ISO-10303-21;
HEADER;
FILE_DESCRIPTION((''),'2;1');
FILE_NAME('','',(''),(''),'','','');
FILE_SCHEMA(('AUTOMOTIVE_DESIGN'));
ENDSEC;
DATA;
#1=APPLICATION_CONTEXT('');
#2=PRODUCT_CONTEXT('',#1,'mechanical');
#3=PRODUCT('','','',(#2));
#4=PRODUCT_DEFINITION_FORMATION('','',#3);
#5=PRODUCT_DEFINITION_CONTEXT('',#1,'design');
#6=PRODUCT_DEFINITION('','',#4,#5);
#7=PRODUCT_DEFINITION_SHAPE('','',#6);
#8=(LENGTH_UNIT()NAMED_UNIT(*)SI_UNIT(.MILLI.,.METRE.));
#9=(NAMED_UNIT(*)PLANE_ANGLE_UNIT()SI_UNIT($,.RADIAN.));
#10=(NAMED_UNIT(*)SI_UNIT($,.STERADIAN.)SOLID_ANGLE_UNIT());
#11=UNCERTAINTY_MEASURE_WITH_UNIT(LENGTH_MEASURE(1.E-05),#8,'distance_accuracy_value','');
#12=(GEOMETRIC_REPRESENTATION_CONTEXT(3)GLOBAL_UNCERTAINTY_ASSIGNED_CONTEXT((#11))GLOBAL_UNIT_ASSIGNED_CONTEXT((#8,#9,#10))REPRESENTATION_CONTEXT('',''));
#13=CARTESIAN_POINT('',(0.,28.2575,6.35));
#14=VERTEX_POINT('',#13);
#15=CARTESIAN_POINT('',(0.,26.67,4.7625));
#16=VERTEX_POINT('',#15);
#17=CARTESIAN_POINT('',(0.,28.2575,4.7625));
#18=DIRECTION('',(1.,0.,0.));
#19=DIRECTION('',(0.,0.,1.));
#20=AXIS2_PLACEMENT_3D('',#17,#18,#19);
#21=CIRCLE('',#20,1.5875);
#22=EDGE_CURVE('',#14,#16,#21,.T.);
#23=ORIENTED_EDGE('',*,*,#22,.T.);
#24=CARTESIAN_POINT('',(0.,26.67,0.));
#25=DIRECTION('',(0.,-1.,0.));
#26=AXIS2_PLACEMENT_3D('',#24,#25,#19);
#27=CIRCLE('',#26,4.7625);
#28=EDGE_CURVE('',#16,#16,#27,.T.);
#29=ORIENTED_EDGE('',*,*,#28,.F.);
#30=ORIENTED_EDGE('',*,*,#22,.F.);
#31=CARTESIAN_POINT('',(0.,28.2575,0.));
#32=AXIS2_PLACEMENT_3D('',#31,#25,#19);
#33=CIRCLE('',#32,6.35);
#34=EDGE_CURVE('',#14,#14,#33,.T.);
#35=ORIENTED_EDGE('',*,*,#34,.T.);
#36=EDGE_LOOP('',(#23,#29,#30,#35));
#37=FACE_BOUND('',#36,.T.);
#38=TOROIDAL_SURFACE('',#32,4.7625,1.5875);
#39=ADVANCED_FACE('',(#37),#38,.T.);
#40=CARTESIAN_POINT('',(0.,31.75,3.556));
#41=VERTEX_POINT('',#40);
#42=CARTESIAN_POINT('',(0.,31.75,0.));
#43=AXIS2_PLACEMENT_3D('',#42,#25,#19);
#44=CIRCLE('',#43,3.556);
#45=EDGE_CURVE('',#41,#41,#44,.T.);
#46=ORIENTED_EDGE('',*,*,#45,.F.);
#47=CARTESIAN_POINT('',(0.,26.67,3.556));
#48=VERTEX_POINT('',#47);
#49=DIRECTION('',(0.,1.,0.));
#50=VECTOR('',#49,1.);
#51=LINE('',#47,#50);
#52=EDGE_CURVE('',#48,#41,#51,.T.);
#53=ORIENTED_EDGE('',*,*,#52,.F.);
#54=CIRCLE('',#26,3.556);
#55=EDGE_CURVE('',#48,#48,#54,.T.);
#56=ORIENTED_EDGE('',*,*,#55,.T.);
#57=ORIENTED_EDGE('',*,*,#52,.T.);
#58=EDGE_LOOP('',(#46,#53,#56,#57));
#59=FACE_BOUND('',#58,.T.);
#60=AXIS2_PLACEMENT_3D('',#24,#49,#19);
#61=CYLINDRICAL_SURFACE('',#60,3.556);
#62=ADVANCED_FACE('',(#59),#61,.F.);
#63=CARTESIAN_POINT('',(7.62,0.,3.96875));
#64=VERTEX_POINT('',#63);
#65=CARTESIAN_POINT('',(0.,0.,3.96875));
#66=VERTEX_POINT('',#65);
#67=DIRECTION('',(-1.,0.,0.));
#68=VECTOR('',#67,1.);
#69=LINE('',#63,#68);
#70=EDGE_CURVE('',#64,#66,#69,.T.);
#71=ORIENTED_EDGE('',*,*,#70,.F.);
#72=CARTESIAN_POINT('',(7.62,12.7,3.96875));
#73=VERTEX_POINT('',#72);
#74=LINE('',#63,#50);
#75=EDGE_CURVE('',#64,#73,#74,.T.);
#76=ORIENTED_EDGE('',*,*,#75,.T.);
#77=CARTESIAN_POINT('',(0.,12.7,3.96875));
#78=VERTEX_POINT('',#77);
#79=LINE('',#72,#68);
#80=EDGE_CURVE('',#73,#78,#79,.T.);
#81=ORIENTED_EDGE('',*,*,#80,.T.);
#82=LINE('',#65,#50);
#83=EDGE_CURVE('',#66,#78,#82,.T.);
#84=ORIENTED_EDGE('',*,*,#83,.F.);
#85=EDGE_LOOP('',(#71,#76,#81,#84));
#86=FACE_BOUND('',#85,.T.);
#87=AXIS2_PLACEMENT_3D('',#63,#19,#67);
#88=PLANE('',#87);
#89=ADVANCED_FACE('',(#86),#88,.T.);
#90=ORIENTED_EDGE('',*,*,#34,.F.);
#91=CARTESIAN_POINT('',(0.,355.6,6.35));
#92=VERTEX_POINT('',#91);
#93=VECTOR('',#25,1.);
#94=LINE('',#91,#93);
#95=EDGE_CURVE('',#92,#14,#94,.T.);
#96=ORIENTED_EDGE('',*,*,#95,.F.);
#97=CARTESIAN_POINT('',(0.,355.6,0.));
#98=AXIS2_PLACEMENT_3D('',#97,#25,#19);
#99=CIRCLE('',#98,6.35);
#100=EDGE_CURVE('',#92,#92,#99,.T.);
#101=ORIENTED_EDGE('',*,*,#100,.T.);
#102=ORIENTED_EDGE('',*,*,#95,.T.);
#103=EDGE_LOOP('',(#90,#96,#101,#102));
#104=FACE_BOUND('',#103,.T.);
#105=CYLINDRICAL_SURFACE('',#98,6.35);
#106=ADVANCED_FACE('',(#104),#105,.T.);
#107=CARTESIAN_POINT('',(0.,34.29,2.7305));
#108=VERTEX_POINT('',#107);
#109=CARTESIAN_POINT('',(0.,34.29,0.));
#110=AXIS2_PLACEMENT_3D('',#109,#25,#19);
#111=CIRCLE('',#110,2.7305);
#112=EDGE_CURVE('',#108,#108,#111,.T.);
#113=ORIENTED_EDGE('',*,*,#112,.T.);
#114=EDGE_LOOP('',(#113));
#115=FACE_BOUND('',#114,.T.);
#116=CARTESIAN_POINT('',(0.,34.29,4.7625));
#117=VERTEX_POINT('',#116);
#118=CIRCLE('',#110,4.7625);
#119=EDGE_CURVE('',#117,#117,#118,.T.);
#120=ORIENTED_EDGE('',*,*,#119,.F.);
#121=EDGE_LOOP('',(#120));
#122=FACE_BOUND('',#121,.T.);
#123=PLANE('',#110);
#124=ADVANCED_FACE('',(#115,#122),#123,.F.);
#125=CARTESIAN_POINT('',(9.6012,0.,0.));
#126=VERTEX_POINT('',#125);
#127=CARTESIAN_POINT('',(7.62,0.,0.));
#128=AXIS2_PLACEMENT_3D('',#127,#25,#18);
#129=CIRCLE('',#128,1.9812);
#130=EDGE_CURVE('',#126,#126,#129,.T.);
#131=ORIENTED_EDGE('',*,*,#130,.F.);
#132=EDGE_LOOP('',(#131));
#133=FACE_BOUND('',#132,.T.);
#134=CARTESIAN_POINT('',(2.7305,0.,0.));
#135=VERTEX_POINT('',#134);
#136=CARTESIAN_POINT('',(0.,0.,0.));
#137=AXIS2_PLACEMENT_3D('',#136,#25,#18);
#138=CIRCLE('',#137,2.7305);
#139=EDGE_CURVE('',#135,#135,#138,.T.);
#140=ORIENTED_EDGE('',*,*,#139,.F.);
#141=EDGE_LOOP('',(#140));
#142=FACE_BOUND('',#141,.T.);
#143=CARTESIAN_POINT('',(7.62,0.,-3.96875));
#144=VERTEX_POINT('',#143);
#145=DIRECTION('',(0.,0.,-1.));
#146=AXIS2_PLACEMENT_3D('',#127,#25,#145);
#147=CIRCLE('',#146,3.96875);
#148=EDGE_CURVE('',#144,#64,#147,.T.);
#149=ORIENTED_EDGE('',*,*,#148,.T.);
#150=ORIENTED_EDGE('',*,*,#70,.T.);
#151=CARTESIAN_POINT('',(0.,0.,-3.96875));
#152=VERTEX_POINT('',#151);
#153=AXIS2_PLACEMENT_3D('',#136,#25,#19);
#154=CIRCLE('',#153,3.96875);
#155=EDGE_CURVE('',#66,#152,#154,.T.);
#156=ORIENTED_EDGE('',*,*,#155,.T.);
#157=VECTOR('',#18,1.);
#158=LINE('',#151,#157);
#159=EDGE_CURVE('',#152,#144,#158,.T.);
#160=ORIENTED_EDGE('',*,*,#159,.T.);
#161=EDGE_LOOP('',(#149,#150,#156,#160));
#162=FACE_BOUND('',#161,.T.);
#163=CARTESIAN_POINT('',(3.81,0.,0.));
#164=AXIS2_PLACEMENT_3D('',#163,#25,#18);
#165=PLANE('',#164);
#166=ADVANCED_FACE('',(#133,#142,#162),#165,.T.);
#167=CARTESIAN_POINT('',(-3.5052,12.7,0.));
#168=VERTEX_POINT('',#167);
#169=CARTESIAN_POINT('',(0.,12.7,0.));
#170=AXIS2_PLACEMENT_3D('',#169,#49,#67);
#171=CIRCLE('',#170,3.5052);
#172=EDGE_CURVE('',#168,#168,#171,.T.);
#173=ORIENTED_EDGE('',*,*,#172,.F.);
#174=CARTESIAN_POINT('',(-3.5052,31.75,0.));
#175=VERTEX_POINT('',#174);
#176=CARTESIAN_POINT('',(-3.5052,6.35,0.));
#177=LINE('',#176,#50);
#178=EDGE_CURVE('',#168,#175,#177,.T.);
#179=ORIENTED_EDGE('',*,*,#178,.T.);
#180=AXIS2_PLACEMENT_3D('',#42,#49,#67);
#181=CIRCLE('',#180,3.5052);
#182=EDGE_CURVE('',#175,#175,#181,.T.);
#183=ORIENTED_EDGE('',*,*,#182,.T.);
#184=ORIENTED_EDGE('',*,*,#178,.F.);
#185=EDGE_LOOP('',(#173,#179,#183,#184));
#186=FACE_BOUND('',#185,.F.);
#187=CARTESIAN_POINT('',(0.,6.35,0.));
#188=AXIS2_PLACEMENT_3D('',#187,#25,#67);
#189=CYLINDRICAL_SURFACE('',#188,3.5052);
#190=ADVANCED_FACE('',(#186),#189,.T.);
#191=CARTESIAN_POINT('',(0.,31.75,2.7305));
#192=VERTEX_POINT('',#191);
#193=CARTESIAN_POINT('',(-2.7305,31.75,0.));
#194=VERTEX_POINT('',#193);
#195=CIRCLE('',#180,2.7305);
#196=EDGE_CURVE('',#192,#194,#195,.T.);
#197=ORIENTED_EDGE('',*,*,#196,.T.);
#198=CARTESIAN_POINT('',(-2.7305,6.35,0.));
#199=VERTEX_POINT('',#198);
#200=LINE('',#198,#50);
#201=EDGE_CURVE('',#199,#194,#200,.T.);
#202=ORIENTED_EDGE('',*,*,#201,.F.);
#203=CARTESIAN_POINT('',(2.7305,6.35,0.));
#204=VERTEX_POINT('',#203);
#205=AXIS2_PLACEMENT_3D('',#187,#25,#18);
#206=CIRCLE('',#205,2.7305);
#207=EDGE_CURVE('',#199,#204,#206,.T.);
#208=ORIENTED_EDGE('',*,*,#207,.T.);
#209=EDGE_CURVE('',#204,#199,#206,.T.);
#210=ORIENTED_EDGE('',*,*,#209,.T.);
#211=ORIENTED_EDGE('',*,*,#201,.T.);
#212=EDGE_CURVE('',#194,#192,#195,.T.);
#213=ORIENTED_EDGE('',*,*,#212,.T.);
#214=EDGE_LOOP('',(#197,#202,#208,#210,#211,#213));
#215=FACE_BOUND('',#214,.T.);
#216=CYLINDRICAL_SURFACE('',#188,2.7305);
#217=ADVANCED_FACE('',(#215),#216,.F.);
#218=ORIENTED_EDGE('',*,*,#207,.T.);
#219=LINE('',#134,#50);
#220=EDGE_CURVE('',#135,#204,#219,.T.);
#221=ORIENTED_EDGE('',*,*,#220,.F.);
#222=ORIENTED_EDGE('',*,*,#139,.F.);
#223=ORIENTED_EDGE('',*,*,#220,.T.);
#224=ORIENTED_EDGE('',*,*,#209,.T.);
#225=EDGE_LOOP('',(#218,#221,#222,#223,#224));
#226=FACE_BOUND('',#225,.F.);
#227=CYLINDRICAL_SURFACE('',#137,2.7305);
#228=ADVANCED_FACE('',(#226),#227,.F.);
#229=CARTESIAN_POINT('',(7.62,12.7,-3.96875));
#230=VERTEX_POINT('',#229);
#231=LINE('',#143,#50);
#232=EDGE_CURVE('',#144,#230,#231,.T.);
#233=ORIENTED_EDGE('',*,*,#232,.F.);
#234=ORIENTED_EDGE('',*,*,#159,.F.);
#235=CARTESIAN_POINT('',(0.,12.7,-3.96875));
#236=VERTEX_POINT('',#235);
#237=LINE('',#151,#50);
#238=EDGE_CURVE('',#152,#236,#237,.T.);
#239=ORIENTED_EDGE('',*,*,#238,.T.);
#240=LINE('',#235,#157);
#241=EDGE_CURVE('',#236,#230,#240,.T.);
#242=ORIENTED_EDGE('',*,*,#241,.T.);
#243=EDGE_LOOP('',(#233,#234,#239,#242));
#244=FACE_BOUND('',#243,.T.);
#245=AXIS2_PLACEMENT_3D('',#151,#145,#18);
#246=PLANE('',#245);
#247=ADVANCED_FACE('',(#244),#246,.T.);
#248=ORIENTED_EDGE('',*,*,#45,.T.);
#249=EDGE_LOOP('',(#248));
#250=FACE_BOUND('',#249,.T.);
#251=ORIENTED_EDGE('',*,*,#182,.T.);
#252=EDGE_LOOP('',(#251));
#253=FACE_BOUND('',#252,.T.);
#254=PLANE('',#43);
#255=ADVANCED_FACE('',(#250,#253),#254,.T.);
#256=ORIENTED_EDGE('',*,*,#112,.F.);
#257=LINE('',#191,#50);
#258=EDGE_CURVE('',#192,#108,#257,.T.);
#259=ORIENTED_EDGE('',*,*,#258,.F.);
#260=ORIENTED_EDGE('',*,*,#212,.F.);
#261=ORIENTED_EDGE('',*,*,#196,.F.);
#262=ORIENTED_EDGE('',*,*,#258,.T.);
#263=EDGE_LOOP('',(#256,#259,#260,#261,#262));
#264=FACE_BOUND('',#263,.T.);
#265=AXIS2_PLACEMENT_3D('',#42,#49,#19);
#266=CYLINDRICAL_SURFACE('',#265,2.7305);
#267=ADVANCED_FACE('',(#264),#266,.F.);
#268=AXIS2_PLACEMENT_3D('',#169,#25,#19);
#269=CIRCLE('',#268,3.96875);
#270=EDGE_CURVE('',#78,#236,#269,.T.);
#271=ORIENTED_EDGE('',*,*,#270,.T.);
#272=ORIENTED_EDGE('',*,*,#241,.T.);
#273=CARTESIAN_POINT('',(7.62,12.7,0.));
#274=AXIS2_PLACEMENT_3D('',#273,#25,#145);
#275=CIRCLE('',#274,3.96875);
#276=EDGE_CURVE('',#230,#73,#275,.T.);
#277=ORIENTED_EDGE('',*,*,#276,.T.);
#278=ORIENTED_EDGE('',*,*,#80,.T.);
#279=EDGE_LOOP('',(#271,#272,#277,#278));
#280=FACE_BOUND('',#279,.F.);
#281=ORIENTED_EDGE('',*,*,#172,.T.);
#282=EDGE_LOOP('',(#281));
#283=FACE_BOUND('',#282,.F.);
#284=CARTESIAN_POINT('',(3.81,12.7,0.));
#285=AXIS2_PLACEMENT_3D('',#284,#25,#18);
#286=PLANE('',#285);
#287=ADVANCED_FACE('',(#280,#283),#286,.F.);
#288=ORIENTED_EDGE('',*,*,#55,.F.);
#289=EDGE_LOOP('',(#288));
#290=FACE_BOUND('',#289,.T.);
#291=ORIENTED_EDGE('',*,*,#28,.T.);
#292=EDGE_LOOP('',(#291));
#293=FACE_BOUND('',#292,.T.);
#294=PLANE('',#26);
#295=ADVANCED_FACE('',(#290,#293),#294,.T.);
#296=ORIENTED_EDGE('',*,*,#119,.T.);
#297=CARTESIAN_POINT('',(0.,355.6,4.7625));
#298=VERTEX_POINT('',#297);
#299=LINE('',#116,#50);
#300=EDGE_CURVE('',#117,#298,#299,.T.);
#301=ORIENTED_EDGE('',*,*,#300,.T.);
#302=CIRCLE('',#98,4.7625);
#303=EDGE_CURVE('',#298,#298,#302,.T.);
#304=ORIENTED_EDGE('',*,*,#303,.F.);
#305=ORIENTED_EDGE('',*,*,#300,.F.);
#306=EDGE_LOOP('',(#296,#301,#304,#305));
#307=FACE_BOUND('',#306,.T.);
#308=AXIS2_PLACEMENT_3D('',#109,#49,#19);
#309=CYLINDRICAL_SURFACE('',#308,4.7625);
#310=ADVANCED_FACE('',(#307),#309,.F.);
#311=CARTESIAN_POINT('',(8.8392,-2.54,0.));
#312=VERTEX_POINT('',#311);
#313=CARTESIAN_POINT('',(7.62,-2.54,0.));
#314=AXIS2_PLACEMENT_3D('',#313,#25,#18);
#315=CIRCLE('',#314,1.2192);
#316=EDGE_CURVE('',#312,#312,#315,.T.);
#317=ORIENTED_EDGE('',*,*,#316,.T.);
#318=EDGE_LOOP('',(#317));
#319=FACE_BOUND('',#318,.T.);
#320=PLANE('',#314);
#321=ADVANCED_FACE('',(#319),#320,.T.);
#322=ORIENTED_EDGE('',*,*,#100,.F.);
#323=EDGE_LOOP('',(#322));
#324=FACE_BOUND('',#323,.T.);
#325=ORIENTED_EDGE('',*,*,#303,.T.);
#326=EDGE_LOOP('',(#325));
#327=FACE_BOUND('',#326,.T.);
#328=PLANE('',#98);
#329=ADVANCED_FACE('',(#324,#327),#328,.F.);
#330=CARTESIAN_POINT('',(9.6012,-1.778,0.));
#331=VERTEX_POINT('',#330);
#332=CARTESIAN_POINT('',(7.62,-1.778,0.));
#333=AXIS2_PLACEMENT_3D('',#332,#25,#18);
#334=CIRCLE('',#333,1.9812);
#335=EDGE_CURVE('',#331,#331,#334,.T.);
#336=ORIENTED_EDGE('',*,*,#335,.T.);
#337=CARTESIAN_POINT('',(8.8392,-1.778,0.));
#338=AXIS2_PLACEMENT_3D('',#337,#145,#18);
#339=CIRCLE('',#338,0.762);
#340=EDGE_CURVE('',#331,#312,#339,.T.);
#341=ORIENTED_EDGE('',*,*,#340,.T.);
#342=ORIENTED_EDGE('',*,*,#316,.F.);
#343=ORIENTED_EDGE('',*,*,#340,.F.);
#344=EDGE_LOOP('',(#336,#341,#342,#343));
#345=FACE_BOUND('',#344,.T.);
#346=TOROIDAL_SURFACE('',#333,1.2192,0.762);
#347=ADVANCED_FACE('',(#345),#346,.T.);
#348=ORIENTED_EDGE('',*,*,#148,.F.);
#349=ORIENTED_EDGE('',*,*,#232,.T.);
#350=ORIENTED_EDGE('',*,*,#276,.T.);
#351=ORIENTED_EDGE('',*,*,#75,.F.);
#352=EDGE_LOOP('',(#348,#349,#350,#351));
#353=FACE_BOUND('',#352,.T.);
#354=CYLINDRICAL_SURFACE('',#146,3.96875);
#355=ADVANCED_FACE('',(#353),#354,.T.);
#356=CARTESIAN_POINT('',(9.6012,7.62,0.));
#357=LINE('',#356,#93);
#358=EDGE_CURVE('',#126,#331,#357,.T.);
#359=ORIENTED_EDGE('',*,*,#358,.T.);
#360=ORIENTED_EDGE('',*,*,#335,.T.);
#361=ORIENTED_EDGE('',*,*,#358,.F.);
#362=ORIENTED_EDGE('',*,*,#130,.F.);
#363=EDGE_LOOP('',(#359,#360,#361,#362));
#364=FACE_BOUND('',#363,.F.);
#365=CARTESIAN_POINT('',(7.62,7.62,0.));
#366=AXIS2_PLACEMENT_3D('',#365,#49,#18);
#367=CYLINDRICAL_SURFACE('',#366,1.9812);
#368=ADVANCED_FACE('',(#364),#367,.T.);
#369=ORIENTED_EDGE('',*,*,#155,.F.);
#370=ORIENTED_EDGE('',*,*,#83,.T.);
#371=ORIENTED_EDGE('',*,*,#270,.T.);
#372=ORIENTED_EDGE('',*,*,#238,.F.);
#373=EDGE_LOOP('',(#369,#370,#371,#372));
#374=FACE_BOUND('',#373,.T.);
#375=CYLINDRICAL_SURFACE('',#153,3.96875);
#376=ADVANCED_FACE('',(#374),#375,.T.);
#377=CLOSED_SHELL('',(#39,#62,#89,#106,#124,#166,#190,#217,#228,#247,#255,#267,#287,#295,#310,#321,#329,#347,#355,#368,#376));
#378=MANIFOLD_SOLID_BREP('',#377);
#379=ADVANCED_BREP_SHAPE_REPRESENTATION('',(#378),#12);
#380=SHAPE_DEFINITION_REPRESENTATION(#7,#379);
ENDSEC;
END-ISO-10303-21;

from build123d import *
from build123d import SkipClean  # not in build123d's __all__

# Parameters (mm, degrees)
F0_R     = 2.7305
F1_DEPTH = 12.7
F2_R     = 3.5052
F3_DEPTH = 6.35
F4_R     = 1.9812
F5_DEPTH = 7.62
F6_R     = 3.5052
F6_R_2   = 2.7305
F7_DEPTH = 25.4
F8_R     = 1.9812
F9_DEPTH = 10.16
F10_R    = 0.762


# Not quite as in the source:
# - after a boolean that leaves OpenCascade's solid faulty, fix() repairs it


with BuildPart() as f1:
    # F0 (on Front) → F1 (new body)
    with BuildSketch(Plane.XZ):
        with BuildLine():
            Line((7.62, 3.96875), (0, 3.96875))
            ThreePointArc((0, 3.96875), (-3.96875, 0), (0, -3.96875))
            Line((0, -3.96875), (7.62, -3.96875))
            ThreePointArc((7.62, -3.96875), (11.58875, 0), (7.62, 3.96875))
        make_face()
        Circle(F0_R, mode=Mode.SUBTRACT)
    extrude(amount=-F1_DEPTH)

    # F2 (on face) → F3 (cut)
    with BuildSketch(Plane(origin=(0, 12.7, 0), x_dir=(-1, 0, 0), z_dir=(0, 1, 0))):
        Circle(F2_R)
    extrude(amount=-F3_DEPTH, mode=Mode.SUBTRACT)

    # F4 (on face) → F5 (cut)
    with BuildSketch(Plane.XZ):
        with Locations((7.62, 0)):
            Circle(F4_R)
    extrude(amount=-F5_DEPTH, mode=Mode.SUBTRACT)

    # F6 (on face) → F7 (join)
    with BuildSketch(Plane(origin=(0, 6.35, 0), x_dir=(-1, 0, 0), z_dir=(0, 1, 0))):
        Circle(F6_R)
        Circle(F6_R_2, mode=Mode.SUBTRACT)
    with SkipClean():  # cleaning this boolean's faces spoils the solid; the shape is the same uncleaned
        extrude(amount=F7_DEPTH)

    # F8 (on face) → F9 (join)
    with BuildSketch(Plane.XZ.offset(-7.62)):
        with Locations((7.62, 0)):
            Circle(F8_R)
    extrude(amount=F9_DEPTH)

    add(f1.part.fix(), mode=Mode.REPLACE)

    # F10
    f10_edges = [f1.edges().sort_by_distance(p)[0] for p in [
        (5.6388, -2.54, 0),
    ]]
    fillet(f10_edges, radius=F10_R)

    # F11 (on Right) → F12 (revolve)
    with BuildSketch(Plane.YZ):
        with BuildLine():
            Line((26.67, 4.7625), (26.67, 3.556))
            Line((26.67, 3.556), (31.75, 3.556))
            Line((31.75, 3.556), (31.75, 2.7305))
            Line((31.75, 2.7305), (34.29, 2.7305))
            Line((34.29, 2.7305), (34.29, 4.7625))
            Line((34.29, 4.7625), (355.6, 4.7625))
            Line((355.6, 4.7625), (355.6, 6.35))
            Line((355.6, 6.35), (28.2575, 6.35))
            ThreePointArc((28.2575, 6.35), (27.1349679849, 5.8850320151), (26.67, 4.7625))
        make_face()
    revolve(axis=Axis((0, 6.35, 0), (0, -1, 0)))


solid = f1.part
